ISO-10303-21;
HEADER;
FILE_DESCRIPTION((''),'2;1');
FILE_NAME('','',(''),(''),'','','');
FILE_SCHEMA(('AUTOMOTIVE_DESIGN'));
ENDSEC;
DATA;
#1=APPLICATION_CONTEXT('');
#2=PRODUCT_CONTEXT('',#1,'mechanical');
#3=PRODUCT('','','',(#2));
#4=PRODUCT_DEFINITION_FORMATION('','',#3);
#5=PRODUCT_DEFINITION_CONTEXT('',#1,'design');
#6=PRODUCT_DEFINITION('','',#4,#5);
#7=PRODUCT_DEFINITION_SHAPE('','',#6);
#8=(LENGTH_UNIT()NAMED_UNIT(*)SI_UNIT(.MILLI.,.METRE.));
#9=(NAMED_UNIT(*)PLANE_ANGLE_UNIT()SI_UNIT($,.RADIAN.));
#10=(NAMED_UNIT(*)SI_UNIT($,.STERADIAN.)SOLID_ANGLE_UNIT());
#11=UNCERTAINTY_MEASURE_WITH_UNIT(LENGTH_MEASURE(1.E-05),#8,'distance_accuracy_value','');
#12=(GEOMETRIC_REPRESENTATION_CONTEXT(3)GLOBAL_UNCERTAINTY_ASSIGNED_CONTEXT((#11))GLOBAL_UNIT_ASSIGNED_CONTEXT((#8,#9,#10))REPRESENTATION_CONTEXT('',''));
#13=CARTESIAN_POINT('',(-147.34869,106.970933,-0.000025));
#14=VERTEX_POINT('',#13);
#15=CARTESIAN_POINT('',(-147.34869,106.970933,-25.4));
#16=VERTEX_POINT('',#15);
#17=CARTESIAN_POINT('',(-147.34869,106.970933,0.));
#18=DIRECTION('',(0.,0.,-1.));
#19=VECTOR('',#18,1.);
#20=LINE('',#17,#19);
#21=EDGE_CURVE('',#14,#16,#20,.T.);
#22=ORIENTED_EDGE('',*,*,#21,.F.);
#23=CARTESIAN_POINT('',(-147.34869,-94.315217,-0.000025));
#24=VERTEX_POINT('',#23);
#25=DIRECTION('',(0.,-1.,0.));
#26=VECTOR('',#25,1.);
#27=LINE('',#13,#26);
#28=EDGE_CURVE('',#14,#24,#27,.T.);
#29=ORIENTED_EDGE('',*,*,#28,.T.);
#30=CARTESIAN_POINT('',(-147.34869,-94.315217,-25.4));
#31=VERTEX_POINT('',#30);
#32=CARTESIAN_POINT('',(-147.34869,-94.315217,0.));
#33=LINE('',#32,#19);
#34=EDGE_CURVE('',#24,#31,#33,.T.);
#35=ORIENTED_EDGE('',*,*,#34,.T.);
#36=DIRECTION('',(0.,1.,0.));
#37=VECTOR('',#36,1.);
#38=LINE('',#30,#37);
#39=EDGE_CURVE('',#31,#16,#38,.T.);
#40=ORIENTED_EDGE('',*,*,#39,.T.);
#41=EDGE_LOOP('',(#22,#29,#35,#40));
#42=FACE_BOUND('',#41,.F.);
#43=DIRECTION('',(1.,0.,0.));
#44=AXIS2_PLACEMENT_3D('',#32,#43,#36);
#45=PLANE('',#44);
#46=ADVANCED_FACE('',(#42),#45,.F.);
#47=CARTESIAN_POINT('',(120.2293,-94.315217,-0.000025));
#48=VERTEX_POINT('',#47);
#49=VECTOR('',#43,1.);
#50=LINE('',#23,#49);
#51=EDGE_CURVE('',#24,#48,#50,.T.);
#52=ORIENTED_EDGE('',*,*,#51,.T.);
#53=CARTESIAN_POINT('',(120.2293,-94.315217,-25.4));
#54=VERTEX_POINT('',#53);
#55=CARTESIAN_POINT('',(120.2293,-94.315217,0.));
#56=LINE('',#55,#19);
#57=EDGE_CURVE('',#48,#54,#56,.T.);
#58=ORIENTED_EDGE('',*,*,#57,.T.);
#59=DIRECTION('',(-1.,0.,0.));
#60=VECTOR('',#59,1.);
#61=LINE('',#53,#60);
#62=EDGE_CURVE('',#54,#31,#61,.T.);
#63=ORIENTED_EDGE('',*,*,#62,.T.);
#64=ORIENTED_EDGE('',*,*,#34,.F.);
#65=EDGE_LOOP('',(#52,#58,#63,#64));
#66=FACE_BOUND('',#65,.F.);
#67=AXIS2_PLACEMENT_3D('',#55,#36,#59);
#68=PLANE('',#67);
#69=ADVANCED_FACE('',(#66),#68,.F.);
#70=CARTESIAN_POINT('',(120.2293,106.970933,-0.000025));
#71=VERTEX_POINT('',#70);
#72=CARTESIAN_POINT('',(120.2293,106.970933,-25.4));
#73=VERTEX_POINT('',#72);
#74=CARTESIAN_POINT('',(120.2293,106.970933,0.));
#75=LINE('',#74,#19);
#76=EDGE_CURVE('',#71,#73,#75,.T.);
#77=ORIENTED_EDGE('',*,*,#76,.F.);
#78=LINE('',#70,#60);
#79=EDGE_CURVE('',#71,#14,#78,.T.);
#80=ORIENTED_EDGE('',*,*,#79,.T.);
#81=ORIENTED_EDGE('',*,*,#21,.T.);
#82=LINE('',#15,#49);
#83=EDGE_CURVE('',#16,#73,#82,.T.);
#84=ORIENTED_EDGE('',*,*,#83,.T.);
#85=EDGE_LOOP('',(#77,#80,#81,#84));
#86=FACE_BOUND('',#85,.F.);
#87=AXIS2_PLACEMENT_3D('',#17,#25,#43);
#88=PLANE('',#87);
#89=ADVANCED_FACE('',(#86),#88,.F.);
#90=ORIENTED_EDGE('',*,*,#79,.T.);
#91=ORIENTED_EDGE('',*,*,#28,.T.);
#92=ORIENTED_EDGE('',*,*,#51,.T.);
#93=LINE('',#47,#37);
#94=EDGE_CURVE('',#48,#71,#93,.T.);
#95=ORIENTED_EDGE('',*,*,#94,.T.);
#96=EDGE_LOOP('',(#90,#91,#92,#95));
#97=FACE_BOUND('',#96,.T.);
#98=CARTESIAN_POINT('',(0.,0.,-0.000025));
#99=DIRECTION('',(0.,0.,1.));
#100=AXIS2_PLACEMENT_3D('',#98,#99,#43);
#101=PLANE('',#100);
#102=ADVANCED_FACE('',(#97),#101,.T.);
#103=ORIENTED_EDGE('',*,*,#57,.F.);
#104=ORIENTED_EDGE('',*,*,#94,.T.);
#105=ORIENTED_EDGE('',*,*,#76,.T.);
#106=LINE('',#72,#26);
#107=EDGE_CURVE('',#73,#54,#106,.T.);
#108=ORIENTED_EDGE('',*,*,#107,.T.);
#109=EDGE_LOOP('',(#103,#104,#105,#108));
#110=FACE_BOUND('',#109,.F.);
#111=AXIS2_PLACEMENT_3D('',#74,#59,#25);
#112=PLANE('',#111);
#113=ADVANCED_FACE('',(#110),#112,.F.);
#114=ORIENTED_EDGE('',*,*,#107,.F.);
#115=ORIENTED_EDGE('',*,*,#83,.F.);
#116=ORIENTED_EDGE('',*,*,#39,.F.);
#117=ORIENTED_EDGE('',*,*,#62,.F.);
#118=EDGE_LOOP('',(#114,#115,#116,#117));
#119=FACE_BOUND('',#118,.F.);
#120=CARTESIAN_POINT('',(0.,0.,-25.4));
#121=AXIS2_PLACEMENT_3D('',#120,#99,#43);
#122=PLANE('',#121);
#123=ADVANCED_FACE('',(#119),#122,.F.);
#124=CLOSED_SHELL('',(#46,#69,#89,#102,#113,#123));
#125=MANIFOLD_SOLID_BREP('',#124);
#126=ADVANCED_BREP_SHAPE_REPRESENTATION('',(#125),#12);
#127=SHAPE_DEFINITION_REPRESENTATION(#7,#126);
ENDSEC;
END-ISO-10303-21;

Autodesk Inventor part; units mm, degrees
ref_plane "YZ Plane" through (0, 0, 0) normal (1, 0, 0) x (0, 1, 0)
ref_plane "XZ Plane" through (0, 0, 0) normal (0, 1, 0) x (-1, 0, 0)
ref_plane "XY Plane" through (0, 0, 0) normal (0, 0, 1) x (1, 0, 0)
sketch "Sketch1" plane through (0, 0, 0) normal (0, 0, 1) x (1, 0, 0)
  line L0 (-148.007302, 104.602631) -> (122.92604, 104.602631) construction
  line L1 (122.92604, 104.602631) -> (122.92604, -98.597366) construction
  line L2 (122.92604, -98.597366) -> (-148.007302, -98.597366) construction
  line L3 (-148.007302, -98.597366) -> (-148.007302, 104.602631) construction
  point P0 (0, 0)
sketch "Sketch3" plane through (0, 0, 0) normal (0, 0, 1) x (1, 0, 0)
  line L0 (-147.399591, 106.795076) -> (122.868294, 106.795076) construction
  line L1 (122.868294, 106.795076) -> (122.868294, -95.905826) construction
  line L2 (122.868294, -95.905826) -> (-147.399591, -95.905826) construction
  line L3 (-147.399591, -95.905826) -> (-147.399591, 106.795076) construction
  point P0 (0, 0)
sketch "Sketch4" plane through (0, 0, 0) normal (0, 0, 1) x (1, 0, 0)
  line L0 (-147.34869, 106.970933) -> (120.2293, 106.970933)
  line L1 (120.2293, 106.970933) -> (120.2293, -94.315217)
  line L2 (120.2293, -94.315217) -> (-147.34869, -94.315217)
  line L3 (-147.34869, -94.315217) -> (-147.34869, 106.970933)
  point P0 (0, 0)
extrude "Extrusion2" add sketch "Sketch4" against normal blind 25.4
sketch "Sketch5" plane through (0, 0, 0) normal (0, 0, 1) x (1, 0, 0)
  line L0 (-147.34869, -94.315217) -> (120.2293, -94.315217)
  line L1 (120.2293, -94.315217) -> (120.2293, 106.970933)
  line L2 (120.2293, 106.970933) -> (-147.34869, 106.970933)
  line L3 (-147.34869, 106.970933) -> (-147.34869, -94.315217)
  point P0 (0, 0)
extrude "Extrusion3" cut sketch "Sketch5" against normal blind 0.000025
decal "Decal1"
properties part number "SXS"
